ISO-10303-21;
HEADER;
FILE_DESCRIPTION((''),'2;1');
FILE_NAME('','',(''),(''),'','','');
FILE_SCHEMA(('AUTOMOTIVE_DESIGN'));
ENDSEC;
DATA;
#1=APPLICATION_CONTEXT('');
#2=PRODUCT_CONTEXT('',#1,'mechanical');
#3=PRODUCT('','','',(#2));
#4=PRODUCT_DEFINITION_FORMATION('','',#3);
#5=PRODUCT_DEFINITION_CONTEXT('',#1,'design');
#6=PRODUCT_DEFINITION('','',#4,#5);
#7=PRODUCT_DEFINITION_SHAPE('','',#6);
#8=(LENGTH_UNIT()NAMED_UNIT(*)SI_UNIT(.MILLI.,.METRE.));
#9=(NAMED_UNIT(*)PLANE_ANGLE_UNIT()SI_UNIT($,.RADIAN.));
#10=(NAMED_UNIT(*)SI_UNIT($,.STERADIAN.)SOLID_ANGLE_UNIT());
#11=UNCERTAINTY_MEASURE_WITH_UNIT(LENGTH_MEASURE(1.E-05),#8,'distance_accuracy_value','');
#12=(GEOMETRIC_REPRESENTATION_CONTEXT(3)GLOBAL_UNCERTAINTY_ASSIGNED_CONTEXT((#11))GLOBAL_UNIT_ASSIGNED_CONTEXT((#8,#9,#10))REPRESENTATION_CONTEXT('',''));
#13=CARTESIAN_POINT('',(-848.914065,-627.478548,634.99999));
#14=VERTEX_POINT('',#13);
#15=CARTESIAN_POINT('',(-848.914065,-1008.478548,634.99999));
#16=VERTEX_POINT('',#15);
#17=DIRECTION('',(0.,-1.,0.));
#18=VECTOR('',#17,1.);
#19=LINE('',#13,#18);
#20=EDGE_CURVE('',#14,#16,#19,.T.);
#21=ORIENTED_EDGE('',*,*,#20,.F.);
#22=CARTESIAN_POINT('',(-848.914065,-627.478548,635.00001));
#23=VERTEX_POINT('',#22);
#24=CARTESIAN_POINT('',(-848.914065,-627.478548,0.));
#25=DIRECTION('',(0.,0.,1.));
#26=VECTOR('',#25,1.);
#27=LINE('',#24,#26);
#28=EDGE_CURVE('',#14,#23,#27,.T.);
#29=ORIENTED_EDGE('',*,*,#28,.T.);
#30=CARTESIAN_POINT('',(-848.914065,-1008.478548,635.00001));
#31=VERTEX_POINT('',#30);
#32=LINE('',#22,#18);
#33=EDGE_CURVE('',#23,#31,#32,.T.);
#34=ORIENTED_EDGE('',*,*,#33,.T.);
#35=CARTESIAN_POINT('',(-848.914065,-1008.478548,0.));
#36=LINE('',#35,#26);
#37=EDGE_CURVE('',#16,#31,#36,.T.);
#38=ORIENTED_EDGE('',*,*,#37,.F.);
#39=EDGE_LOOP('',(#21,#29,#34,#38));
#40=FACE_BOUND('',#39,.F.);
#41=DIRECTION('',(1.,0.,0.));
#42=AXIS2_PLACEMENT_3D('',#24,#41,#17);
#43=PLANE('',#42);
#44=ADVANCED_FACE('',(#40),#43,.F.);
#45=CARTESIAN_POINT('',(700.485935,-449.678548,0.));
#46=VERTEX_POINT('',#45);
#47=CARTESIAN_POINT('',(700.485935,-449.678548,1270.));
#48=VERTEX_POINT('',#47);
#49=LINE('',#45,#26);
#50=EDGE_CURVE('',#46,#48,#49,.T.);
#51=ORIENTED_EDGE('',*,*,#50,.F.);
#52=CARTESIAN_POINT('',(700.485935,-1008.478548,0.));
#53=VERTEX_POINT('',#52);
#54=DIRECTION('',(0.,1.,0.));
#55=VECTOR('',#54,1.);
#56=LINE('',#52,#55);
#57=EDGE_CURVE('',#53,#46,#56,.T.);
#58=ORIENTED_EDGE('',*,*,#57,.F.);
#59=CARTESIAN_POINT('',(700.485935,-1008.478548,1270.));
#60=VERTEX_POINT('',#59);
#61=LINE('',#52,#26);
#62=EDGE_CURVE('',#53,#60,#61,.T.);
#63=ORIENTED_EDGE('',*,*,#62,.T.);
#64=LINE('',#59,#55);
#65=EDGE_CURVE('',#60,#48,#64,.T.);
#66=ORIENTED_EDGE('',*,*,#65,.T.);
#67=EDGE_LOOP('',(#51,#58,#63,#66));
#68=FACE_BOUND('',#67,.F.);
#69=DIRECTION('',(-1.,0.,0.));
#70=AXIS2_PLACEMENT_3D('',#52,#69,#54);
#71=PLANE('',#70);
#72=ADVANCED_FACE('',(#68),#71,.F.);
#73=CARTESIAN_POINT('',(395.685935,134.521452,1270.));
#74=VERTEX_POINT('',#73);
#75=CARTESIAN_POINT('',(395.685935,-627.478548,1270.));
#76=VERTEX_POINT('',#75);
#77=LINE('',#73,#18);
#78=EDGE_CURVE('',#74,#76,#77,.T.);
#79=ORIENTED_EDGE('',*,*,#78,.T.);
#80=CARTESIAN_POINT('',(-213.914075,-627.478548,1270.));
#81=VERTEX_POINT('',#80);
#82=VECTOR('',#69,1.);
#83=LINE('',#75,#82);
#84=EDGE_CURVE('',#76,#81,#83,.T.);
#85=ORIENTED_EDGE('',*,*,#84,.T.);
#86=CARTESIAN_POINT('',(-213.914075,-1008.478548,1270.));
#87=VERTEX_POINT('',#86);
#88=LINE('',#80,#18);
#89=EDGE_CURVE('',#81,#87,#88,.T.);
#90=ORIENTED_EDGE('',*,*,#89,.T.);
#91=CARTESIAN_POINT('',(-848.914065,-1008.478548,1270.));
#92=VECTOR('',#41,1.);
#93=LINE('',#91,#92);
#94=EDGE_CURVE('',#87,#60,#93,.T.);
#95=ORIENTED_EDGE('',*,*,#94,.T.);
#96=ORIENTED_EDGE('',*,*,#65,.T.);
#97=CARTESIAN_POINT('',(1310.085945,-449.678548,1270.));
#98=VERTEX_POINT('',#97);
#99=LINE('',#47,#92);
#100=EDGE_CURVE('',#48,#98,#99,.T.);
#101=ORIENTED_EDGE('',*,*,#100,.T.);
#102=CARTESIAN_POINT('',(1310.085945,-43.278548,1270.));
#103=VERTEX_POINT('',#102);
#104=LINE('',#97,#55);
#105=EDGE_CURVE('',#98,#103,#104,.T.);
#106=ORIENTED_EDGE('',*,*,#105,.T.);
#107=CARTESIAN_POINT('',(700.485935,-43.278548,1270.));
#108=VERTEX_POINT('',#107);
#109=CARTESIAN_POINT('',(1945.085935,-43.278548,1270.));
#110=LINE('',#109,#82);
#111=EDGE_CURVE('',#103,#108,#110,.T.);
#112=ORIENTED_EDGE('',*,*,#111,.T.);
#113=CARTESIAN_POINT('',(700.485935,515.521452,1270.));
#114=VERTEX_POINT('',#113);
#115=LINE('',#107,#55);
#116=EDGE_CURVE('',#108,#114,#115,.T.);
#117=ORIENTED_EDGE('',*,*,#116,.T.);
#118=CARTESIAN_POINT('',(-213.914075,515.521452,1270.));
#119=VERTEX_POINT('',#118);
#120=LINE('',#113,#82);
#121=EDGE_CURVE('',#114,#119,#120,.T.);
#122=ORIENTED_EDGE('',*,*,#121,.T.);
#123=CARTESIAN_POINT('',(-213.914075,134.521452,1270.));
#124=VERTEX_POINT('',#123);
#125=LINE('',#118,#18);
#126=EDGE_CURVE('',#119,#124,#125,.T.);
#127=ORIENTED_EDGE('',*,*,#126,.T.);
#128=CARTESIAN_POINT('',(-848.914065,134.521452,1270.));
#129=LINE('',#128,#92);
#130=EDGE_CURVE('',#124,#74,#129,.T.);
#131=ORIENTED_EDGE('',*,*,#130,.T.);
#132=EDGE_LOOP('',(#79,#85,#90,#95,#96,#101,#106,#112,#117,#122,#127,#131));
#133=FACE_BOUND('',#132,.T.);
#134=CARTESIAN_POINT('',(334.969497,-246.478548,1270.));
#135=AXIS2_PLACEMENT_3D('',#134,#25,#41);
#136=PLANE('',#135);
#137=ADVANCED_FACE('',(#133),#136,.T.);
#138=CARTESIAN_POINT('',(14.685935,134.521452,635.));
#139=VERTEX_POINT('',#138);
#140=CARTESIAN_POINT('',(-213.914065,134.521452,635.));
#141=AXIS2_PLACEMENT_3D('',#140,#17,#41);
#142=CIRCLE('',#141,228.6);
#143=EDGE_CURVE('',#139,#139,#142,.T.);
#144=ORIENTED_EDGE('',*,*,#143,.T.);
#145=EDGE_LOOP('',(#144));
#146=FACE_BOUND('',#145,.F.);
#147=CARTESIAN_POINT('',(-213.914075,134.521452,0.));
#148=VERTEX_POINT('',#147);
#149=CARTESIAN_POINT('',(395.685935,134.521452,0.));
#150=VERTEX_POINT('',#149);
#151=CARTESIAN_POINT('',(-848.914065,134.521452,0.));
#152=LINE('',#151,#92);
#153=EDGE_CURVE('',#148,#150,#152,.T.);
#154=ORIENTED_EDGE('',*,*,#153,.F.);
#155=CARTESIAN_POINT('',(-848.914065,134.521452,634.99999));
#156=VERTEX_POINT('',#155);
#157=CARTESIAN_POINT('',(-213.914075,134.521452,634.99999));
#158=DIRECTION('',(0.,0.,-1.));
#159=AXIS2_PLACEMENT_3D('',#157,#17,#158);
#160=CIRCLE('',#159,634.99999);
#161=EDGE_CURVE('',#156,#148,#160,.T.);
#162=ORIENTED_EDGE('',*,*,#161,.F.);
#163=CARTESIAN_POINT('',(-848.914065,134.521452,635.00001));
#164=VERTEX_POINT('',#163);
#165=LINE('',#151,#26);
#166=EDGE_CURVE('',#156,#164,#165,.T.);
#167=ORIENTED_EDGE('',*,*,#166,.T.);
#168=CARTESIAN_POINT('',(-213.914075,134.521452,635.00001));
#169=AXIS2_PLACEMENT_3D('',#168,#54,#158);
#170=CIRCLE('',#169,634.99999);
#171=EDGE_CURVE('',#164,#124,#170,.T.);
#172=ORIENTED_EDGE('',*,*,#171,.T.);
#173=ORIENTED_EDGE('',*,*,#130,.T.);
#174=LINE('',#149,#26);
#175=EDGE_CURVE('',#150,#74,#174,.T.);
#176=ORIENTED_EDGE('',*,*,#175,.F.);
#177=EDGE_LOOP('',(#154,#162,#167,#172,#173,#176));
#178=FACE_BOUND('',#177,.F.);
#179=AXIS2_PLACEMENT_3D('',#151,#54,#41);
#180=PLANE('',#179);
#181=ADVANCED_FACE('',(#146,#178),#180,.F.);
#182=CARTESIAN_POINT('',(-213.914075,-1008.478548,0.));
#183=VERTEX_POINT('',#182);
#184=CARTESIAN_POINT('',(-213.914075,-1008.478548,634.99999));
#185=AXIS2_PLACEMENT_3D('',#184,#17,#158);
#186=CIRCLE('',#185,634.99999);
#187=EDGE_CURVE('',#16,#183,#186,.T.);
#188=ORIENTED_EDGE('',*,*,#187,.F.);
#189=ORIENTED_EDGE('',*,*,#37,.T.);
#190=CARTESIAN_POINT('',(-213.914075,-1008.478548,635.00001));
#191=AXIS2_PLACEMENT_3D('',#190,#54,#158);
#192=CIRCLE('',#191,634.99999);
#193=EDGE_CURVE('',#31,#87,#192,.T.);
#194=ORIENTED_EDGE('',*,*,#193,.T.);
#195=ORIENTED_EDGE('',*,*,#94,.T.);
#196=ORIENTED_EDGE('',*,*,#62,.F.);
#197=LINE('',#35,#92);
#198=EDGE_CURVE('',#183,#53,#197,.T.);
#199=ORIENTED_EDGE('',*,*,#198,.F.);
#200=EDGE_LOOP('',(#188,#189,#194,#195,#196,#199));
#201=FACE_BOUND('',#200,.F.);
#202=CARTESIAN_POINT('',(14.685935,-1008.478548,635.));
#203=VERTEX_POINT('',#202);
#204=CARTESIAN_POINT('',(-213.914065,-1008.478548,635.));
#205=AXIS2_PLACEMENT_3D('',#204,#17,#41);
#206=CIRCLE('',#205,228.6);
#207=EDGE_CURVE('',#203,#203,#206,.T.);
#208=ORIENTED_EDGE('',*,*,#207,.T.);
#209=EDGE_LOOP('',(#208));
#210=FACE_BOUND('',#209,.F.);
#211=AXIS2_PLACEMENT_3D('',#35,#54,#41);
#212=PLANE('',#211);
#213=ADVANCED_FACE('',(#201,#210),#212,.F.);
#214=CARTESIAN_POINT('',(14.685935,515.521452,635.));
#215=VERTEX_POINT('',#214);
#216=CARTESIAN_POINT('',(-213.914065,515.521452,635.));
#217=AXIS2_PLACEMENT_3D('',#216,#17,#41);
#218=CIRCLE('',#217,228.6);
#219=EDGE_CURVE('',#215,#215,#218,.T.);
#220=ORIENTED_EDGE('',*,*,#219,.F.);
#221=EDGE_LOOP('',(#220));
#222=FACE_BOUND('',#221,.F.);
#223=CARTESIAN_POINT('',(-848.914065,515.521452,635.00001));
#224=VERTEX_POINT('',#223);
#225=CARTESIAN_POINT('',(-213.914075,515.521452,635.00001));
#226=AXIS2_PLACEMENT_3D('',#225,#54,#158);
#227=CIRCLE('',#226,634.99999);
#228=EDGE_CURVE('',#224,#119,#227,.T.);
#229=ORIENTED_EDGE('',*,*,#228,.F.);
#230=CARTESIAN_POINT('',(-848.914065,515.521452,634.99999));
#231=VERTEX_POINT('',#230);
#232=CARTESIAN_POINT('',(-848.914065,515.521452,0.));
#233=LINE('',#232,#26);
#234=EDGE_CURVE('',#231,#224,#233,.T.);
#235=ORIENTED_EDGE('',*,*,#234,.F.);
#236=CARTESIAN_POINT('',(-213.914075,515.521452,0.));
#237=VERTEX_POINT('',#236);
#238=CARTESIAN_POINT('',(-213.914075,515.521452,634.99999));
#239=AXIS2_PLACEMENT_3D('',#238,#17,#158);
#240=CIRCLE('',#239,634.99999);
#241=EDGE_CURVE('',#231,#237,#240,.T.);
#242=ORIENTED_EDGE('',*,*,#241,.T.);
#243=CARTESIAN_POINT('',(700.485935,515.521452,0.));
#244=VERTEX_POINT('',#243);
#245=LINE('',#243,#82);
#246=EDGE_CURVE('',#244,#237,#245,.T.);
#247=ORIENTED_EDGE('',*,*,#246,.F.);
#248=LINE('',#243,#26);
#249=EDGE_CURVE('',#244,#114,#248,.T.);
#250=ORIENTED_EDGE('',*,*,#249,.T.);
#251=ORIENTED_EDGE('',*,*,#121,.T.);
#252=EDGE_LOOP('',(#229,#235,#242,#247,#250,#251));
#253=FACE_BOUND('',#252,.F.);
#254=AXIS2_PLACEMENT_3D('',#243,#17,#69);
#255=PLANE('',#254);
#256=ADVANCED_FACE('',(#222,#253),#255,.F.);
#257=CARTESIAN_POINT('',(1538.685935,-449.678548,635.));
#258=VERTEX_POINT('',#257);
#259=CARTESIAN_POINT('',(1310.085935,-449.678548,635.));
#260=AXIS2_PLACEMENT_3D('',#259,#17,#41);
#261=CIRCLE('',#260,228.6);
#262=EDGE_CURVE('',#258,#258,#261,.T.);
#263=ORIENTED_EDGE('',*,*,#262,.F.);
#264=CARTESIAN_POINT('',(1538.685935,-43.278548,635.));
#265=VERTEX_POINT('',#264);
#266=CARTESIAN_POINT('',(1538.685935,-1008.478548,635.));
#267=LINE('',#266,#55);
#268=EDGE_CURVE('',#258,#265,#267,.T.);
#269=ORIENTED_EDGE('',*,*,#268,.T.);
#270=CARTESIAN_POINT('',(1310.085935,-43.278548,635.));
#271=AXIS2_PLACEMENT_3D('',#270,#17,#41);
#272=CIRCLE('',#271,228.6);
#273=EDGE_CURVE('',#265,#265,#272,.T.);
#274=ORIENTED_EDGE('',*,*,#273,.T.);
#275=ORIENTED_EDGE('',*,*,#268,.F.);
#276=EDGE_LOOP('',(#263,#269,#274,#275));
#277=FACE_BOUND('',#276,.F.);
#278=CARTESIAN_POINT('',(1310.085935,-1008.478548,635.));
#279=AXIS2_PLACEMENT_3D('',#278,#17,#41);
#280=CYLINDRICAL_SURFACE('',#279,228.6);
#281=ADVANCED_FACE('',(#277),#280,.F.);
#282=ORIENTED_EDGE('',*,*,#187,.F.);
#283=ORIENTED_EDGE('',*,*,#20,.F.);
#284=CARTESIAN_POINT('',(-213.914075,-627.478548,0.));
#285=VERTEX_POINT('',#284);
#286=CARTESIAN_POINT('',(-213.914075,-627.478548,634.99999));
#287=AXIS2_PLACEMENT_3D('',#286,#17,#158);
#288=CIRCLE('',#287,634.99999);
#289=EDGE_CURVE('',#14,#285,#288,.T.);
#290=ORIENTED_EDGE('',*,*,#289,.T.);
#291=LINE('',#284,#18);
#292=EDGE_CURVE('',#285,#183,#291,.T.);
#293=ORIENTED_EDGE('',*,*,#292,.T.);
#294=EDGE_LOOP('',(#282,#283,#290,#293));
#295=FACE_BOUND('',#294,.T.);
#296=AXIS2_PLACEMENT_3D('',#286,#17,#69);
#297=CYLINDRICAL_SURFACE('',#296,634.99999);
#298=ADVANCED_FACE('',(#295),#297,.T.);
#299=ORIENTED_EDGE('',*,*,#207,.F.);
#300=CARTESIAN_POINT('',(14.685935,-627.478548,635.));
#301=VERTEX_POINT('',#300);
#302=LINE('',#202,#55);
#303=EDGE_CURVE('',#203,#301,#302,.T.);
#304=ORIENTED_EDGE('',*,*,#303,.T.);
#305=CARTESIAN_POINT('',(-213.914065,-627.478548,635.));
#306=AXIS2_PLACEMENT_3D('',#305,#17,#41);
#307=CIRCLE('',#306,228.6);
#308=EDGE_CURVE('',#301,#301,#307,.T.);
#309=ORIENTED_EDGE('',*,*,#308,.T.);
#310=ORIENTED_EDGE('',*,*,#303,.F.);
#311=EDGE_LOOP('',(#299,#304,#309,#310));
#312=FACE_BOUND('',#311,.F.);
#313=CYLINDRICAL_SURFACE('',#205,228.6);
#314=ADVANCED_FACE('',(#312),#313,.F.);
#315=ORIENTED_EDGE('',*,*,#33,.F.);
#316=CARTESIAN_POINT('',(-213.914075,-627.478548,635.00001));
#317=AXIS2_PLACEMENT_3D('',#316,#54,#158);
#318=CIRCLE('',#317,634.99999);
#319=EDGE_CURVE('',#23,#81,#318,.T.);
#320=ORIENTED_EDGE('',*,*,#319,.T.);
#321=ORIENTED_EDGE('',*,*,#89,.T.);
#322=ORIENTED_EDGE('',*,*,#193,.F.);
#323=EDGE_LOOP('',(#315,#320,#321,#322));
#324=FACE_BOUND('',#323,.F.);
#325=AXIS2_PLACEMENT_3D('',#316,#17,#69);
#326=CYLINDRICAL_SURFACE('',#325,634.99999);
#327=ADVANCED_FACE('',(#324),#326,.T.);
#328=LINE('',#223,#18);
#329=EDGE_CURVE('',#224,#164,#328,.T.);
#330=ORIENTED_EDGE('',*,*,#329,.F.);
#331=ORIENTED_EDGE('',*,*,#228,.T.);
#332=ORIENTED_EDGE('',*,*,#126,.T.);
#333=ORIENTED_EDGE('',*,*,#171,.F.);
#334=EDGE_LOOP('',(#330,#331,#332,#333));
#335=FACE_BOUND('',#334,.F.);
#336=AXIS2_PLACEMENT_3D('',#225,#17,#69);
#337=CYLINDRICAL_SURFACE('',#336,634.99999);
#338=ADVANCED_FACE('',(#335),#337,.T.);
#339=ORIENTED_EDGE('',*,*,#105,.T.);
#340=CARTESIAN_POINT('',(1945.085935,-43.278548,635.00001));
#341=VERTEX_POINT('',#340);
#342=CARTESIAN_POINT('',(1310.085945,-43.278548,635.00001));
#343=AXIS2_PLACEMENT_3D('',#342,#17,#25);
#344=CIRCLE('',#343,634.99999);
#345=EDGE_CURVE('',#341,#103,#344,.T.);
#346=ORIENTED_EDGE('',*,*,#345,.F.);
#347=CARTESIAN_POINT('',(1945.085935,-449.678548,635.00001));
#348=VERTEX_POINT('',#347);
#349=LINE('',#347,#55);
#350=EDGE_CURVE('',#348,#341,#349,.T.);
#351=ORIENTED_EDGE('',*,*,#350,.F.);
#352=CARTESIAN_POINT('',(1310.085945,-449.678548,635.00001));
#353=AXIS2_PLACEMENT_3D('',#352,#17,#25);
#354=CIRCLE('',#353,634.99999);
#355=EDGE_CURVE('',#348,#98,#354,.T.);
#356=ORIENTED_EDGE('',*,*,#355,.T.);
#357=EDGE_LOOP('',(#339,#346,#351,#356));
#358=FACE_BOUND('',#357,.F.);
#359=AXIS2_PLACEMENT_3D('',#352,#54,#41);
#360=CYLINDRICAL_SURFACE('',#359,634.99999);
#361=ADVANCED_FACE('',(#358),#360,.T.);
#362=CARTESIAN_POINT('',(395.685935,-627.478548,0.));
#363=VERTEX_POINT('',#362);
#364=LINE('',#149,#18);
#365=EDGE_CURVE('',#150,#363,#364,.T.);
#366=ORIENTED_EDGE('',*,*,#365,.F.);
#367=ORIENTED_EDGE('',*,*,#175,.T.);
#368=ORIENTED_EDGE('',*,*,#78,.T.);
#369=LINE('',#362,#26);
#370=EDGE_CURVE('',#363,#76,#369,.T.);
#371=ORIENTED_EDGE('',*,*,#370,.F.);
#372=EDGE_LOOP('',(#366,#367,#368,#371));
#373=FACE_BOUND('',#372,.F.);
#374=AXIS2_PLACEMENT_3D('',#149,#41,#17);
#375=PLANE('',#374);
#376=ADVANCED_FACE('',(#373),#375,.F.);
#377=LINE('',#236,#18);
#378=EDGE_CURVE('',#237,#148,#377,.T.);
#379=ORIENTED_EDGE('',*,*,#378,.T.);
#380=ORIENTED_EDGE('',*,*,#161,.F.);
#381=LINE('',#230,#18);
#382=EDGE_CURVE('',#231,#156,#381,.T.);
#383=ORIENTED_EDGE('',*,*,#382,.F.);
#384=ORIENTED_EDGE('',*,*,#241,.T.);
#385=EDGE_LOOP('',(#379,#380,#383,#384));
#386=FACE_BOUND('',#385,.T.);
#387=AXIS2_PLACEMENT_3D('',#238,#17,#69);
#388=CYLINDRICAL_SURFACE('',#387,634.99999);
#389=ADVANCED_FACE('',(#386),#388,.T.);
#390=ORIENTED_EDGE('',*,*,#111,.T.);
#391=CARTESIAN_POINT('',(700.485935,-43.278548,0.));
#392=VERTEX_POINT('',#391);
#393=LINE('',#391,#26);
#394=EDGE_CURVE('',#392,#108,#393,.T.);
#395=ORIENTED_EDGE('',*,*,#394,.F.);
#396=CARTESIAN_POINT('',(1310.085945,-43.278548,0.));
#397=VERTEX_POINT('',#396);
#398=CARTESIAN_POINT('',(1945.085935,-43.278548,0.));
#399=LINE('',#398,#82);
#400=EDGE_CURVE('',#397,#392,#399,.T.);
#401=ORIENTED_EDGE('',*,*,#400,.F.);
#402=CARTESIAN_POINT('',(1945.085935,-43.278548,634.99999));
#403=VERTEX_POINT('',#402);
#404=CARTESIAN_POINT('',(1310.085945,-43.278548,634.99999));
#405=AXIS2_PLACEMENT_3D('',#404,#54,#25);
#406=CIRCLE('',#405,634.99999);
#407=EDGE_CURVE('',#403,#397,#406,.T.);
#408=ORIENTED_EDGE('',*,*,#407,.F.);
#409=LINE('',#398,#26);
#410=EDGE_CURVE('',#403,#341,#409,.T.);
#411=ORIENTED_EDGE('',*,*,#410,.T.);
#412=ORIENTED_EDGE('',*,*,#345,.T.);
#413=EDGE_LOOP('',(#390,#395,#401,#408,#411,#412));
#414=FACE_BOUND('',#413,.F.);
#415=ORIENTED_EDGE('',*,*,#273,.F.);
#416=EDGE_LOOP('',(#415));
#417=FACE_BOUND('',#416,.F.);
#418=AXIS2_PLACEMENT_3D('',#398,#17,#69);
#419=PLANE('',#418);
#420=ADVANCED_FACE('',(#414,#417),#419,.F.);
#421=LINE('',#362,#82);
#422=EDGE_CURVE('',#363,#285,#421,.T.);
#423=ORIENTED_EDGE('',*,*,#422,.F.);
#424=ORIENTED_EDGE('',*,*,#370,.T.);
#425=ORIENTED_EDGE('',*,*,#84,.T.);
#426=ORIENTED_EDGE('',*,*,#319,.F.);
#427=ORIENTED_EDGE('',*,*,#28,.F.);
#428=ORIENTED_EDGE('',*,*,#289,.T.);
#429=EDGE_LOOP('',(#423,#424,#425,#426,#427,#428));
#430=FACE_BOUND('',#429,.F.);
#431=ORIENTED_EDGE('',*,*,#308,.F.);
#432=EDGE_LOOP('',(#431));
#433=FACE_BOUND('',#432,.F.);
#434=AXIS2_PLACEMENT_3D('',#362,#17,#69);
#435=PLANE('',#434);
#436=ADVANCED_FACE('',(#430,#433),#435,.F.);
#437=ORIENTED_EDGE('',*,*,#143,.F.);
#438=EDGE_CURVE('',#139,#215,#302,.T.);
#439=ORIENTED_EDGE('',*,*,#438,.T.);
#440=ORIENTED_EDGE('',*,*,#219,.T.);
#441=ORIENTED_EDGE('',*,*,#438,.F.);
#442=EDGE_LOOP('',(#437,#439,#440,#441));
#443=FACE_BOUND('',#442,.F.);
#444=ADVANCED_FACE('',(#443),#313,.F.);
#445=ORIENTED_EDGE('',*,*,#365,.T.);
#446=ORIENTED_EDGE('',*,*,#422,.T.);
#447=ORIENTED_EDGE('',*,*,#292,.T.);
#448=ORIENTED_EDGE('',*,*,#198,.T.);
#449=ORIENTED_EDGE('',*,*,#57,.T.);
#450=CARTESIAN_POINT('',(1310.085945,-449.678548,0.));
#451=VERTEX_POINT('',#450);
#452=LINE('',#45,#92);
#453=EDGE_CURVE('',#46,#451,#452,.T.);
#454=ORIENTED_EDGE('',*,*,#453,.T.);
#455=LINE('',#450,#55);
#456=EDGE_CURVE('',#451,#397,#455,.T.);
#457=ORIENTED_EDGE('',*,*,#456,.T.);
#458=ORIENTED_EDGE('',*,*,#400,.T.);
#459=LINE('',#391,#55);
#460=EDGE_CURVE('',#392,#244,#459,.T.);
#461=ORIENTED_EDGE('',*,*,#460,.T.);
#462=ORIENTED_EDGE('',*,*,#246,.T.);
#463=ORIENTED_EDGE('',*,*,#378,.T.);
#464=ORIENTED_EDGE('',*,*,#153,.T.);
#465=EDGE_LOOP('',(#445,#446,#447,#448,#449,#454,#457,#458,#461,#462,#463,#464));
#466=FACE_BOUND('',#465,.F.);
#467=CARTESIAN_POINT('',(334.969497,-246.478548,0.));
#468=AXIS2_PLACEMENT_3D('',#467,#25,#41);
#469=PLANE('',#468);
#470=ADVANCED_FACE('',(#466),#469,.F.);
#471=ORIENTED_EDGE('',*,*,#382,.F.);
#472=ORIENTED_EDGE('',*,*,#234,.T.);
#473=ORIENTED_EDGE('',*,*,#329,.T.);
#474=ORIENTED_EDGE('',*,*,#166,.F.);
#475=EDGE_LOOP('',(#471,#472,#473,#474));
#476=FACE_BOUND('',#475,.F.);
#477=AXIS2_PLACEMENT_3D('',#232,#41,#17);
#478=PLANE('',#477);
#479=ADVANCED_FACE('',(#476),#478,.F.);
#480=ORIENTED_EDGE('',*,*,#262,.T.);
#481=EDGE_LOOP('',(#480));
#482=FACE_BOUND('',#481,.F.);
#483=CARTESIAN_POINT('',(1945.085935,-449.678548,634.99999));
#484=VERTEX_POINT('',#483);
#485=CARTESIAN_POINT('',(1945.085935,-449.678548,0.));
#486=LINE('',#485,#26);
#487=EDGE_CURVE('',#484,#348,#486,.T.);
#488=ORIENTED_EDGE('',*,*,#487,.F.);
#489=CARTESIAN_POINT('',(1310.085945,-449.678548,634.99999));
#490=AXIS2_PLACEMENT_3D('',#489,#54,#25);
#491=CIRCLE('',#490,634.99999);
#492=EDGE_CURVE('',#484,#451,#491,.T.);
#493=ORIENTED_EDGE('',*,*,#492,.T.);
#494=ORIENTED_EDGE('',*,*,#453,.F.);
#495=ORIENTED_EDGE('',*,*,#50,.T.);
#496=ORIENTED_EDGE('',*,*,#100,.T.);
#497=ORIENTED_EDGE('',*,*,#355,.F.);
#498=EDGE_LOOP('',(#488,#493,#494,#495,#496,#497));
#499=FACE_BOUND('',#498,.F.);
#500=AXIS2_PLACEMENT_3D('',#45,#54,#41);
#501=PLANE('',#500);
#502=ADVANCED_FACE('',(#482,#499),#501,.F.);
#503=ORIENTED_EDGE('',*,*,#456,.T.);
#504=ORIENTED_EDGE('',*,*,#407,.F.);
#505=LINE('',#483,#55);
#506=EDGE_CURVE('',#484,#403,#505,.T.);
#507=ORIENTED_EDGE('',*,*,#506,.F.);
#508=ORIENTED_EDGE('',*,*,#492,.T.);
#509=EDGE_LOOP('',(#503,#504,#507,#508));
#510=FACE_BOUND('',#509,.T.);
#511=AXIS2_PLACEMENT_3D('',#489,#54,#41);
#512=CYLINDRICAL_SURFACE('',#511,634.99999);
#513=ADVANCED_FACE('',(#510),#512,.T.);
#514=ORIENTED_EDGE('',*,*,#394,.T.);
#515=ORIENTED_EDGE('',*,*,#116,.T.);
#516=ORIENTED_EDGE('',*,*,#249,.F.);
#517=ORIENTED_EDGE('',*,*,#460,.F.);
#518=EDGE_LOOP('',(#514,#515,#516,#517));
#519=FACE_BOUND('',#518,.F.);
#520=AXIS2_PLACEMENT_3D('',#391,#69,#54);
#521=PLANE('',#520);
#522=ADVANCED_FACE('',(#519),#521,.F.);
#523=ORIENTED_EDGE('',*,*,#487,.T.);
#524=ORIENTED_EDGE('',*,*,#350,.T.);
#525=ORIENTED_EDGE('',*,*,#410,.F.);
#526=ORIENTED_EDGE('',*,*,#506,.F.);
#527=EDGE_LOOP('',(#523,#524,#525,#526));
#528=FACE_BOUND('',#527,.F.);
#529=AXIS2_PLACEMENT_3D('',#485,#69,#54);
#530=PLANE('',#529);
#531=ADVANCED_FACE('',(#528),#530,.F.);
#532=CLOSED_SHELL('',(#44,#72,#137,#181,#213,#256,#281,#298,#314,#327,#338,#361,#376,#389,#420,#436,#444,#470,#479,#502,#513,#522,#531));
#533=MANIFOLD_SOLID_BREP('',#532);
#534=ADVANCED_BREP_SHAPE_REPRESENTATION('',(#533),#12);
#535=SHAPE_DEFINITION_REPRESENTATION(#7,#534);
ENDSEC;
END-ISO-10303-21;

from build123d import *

# Parameters (mm, degrees)
F1_DEPTH = 1270
F2_R     = 634.99999
F3_R     = 228.6
F4_DEPTH = 2540


# Not quite as in the source:
# - a fillet or chamfer is up to 0.001 mm smaller than in the source, because OpenCascade refuses the exact size


with BuildPart() as f1:
    # F0 (on Top) → F1 (new body)
    with BuildSketch(Plane.XY):
        Polygon((700.4859354367, 515.521452381), (-848.9140645633, 515.521452381), (-848.9140645633, 134.521452381), (395.6859354367, 134.521452381), (395.6859354367, -627.478547619), (-848.9140645633, -627.478547619), (-848.9140645633, -1008.478547619), (700.4859354367, -1008.478547619), (700.4859354367, -449.678547619), (1945.0859354367, -449.678547619), (1945.0859354367, -43.278547619), (700.4859354367, -43.278547619), align=None)
    extrude(amount=F1_DEPTH)

    # F2 (radius 635 in the source; OpenCascade refuses exactly that, so slightly less here)
    f2_edges = [f1.edges().sort_by_distance(p)[0] for p in [
        (1945.085935, -246.478548, 1270),
        (1945.085935, -246.478548, 0),
        (-848.914065, -817.978548, 1270),
        (-848.914065, -817.978548, 0),
        (-848.914065, 325.021452, 0),
        (-848.914065, 325.021452, 1270),
    ]]
    fillet(f2_edges, radius=F2_R)

    # F3 (on face) → F4 (cut)
    with BuildSketch(Plane.XZ.offset(1008.478547619)):
        with Locations((-213.9140645633, 635)):
            Circle(F3_R)
        with Locations((1310.0859354367, 635)):
            Circle(F3_R)
    extrude(amount=-F4_DEPTH, mode=Mode.SUBTRACT)


solid = f1.part
